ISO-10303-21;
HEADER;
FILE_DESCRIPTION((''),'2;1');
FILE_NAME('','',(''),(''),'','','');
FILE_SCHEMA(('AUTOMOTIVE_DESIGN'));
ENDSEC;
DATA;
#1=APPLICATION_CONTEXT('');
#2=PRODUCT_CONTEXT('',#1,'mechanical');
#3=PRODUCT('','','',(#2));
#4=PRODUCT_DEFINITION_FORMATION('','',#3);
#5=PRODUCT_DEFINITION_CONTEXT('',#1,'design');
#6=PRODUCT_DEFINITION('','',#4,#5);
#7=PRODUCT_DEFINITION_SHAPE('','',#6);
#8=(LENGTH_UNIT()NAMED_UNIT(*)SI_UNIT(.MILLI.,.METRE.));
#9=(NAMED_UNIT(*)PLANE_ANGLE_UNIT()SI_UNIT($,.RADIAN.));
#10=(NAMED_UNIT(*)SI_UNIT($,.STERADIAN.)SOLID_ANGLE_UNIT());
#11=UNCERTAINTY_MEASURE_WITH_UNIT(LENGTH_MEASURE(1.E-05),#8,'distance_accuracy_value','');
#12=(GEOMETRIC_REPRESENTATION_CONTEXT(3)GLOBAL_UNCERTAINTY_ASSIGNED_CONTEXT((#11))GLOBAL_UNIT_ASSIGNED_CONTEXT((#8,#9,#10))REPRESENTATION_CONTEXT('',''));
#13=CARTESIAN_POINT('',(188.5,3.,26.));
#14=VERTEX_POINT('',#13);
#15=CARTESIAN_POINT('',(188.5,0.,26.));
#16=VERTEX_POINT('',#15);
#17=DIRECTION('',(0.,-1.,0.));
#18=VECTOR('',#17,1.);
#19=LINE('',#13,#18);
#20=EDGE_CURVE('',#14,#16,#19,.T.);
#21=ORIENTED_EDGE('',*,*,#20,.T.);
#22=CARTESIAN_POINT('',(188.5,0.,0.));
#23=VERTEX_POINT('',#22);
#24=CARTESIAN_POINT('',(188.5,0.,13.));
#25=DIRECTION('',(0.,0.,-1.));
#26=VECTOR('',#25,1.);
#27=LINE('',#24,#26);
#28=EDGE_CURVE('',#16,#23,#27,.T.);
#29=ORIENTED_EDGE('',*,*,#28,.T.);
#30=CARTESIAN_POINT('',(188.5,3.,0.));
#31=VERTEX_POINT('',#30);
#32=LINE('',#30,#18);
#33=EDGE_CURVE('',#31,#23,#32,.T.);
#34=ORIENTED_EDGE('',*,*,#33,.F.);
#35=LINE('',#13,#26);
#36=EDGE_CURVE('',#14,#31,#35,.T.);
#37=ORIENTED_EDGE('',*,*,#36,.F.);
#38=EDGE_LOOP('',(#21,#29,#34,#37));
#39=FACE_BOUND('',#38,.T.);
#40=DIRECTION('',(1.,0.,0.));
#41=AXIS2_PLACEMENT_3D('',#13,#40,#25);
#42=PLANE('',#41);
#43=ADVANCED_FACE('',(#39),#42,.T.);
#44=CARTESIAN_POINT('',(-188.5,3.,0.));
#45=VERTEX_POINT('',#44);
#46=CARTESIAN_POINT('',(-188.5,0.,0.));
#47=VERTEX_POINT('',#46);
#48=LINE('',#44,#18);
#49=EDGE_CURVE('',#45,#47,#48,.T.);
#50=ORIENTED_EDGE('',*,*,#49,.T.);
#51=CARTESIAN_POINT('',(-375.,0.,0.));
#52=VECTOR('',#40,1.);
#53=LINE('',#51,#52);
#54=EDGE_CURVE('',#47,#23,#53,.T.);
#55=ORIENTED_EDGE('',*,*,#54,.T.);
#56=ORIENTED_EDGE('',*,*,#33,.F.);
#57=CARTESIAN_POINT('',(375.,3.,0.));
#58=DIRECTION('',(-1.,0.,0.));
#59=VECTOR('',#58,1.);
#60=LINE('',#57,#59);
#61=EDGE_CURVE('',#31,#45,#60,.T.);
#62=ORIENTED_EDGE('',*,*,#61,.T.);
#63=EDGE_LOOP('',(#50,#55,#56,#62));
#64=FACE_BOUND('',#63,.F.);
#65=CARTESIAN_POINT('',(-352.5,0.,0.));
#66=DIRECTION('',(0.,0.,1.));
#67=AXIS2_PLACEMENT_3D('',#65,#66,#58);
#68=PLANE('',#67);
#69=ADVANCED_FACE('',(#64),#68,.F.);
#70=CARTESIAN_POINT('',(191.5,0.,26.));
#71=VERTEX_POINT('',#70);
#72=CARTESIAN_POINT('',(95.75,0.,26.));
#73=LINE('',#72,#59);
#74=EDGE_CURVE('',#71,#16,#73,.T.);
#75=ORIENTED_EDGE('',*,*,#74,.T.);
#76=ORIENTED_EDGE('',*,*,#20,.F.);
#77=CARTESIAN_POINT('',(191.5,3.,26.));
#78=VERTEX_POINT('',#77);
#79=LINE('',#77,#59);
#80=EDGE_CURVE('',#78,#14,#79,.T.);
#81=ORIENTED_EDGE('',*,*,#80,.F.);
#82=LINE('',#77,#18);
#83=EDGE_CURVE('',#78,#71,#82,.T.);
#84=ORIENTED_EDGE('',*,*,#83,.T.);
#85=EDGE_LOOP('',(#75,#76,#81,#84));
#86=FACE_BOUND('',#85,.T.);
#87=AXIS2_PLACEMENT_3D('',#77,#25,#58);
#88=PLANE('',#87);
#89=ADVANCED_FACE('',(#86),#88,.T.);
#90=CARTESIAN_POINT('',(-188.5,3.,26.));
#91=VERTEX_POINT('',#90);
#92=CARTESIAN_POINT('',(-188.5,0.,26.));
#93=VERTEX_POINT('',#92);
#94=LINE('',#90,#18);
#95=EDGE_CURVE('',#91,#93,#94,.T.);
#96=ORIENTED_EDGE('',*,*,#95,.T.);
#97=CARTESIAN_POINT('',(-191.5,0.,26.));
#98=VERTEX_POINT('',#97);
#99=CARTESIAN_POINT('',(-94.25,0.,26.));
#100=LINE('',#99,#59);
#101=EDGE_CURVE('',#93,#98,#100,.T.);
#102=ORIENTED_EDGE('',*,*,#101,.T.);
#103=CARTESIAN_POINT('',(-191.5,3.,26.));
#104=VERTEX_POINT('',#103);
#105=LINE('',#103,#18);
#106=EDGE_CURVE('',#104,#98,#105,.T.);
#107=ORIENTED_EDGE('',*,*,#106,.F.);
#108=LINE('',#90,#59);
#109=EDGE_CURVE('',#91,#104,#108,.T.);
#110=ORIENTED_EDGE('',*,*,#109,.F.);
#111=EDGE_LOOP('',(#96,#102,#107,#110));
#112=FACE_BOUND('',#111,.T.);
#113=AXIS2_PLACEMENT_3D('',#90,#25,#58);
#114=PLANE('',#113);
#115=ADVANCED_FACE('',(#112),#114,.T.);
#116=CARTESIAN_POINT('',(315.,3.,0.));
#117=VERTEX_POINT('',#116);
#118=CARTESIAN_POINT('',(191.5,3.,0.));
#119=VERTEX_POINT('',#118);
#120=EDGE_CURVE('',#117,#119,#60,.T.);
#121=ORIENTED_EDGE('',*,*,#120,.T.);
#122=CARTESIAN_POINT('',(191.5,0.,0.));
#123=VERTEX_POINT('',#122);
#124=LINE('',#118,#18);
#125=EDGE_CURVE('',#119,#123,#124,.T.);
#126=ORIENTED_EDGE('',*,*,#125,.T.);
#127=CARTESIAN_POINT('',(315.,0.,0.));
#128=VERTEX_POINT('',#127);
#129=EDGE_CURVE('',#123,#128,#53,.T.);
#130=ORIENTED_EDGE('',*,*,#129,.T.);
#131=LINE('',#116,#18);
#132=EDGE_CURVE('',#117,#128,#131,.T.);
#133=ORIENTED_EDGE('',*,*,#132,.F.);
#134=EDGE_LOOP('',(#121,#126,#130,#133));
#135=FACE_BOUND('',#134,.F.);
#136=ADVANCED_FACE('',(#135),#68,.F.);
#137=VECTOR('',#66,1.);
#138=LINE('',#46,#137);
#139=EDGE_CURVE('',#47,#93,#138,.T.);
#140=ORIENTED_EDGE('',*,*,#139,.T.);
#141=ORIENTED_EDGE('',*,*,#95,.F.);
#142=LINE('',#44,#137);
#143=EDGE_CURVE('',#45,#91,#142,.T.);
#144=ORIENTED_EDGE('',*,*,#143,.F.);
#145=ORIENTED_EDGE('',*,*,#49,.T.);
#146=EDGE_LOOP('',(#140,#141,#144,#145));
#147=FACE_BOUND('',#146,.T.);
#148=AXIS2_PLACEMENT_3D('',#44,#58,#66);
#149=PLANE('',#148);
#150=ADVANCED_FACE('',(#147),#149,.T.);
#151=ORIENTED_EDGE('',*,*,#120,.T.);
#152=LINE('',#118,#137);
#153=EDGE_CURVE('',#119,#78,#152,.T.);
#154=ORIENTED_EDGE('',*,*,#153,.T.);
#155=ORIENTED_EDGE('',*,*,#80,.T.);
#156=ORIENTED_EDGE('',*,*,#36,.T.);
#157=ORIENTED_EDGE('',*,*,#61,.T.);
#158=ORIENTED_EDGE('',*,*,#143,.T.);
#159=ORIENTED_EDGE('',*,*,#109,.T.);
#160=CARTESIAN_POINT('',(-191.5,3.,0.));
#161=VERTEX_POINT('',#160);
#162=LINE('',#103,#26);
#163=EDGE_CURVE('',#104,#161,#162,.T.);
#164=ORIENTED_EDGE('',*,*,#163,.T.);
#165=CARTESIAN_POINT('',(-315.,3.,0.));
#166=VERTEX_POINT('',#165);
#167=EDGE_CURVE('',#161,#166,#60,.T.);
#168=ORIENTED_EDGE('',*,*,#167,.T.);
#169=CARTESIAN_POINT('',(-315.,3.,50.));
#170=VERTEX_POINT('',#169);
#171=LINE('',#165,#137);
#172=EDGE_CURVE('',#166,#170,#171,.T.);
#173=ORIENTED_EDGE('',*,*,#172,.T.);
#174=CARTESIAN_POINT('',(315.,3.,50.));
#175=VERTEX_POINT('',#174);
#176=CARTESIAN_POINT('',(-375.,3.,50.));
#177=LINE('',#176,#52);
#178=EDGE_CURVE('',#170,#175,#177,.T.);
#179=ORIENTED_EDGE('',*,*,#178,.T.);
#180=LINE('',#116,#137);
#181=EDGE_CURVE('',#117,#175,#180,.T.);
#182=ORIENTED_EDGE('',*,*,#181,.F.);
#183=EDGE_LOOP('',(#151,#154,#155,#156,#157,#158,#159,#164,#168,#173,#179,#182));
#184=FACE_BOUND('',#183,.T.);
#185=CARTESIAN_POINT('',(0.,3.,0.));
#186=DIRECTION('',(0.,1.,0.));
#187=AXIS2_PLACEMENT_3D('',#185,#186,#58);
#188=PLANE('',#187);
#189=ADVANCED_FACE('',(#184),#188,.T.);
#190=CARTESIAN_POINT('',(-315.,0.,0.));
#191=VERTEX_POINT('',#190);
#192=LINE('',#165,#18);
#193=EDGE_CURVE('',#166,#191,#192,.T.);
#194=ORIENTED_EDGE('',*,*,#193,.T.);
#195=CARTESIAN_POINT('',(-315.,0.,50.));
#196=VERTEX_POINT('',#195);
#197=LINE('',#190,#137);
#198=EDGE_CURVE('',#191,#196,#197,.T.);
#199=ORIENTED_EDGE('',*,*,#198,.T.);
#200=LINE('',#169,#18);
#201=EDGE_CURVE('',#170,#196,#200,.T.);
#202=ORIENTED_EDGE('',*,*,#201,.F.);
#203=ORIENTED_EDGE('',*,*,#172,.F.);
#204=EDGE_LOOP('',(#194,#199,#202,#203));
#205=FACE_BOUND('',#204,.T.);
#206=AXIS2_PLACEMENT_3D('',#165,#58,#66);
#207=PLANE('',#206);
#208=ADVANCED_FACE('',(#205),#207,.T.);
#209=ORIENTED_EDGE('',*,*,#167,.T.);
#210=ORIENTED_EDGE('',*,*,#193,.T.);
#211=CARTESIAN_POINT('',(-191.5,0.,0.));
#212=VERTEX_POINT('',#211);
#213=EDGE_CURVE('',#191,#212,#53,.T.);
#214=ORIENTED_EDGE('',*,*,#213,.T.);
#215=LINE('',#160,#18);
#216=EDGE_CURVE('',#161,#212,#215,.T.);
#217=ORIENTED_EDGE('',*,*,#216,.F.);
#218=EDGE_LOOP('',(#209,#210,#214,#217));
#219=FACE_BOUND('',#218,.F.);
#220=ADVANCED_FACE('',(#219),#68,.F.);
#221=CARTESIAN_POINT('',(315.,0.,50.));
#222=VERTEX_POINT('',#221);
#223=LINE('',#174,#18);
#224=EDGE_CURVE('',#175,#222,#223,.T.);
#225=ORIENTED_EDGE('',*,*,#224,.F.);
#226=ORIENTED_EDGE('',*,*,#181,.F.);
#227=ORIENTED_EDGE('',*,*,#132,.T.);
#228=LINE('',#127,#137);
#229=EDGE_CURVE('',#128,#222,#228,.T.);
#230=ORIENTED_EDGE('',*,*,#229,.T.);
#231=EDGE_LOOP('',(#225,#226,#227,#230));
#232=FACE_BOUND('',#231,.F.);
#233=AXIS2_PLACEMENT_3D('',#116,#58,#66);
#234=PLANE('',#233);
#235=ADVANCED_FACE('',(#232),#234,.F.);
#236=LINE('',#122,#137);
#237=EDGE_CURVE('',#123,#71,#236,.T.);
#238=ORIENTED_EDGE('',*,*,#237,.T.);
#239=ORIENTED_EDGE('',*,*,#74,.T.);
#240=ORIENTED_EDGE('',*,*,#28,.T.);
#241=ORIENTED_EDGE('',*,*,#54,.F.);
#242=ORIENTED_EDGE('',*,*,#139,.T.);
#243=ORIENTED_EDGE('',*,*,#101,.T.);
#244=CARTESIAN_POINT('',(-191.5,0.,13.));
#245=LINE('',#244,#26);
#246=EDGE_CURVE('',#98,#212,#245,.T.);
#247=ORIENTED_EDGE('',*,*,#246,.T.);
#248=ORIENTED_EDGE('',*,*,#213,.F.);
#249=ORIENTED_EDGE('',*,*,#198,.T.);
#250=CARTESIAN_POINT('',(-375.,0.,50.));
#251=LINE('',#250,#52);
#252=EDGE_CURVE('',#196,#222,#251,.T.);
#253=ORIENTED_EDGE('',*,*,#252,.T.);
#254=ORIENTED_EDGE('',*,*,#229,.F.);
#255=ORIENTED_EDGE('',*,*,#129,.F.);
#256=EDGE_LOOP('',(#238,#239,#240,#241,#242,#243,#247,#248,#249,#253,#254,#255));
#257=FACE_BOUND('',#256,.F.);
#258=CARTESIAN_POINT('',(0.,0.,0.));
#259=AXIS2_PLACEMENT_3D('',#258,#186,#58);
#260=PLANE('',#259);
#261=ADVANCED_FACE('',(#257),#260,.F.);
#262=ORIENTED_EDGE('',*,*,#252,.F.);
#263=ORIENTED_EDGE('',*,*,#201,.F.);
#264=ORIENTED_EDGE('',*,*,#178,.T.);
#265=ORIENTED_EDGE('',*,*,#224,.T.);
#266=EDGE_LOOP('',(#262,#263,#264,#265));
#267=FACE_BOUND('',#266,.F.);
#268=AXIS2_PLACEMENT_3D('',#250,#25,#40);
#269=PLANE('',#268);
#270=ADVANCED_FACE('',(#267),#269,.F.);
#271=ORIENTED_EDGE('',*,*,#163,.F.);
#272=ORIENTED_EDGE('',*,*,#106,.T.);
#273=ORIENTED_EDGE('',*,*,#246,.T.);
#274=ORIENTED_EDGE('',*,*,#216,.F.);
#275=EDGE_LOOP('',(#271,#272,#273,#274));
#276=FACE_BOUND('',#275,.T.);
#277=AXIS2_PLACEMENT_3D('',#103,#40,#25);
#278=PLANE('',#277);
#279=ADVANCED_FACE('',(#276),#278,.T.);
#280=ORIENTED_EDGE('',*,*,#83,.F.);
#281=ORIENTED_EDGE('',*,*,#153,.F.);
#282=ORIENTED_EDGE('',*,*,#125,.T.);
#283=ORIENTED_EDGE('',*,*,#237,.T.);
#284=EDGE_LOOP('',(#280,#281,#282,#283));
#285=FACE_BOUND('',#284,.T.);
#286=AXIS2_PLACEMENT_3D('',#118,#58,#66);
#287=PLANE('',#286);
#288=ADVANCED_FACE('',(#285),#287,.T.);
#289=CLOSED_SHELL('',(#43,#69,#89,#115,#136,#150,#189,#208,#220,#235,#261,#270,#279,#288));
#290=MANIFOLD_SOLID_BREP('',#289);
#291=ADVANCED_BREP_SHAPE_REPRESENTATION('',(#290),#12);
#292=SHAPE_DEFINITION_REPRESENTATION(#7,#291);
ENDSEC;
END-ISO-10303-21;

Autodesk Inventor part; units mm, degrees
ref_plane "YZ Plane" through (0, 0, 0) normal (1, 0, 0) x (0, 1, 0)
ref_plane "XZ Plane" through (0, 0, 0) normal (0, 1, 0) x (-1, 0, 0)
ref_plane "XY Plane" through (0, 0, 0) normal (0, 0, 1) x (1, 0, 0)
sketch "Sketch2" plane through (0, 0, 0) normal (0, 1, 0) x (-1, 0, 0)
  line L0 (375, 50) -> (-375, 50)
  line L1 (-375, 50) -> (-375, 0)
  line L2 (-375, 0) -> (375, 0)
  line L3 (375, 0) -> (375, 50)
  circle A0 centre (-375, 0) radius 22.5
  circle A1 centre (375, 0) radius 22.5
  point P0 (0, 0)
  point P1 (0, 0)
  point P2 (-375, 22.5)
  point P3 (-352.5, 0)
  point P4 (352.5, 0)
  point P5 (375, 22.5)
  dimension "d18" = 750
  dimension "d19" = 50
  dimension "d20" = 45
extrude "Plate2" add sketch "Sketch2" along normal blind 3 contours L3 A1 L2 A0 L1 L0 | L3 L2 A1 | A0 L2 L1 picked at (360.188, 1.6689) picked at (-360.9308, 4.923)
sketch "Sketch3" plane through (0, 3, 0) normal (0, 1, 0) x (1, 0, 0)
  line L0 (-190, 0) -> (-190, -50) construction
  line L1 (-375, -50) -> (375, -50) projected
  line L2 (-375, -50) -> (-375, 0) projected
  line L3 (-191.5, 0) -> (-188.5, 0)
  line L4 (-188.5, 0) -> (-188.5, -26)
  line L5 (-188.5, -26) -> (-191.5, -26)
  line L6 (-191.5, -26) -> (-191.5, 0)
  line L7 (-375, 0) -> (375, 0) projected
  line L8 (375, 0) -> (-375, 0) projected
  line L9 (190, 0) -> (190, -50) construction
  line L10 (191.5, -26) -> (188.5, -26)
  line L11 (188.5, -26) -> (188.5, 0)
  line L12 (188.5, 0) -> (191.5, 0)
  line L13 (191.5, 0) -> (191.5, -26)
  point P0 (0, 0)
  point P1 (0, 0)
  point P2 (0, 0)
  point P3 (188.5, 0)
  dimension "d23" = 3
  dimension "d24" = 26
  dimension "d30" = 190
  dimension "d31" = 190
  dimension "d32" = 3
  dimension "d33" = 26
extrude "Extrusion1" cut sketch "Sketch3" against normal through all
sketch "Sketch4" plane through (0, 3, 0) normal (0, 1, 0) x (1, 0, 0)
  line L0 (-188.5, 0) -> (-188.5, -26) projected
  line L1 (-188.5, -26) -> (-191.5, -26) projected
  line L2 (-191.5, -26) -> (-191.5, 0) projected
  line L3 (-375, 0) -> (-191.5, 0) projected
  line L4 (-375, -50) -> (-375, 0) projected
  line L5 (375, -50) -> (-375, -50) projected
  line L6 (375, 0) -> (375, -50) projected
  line L7 (191.5, 0) -> (375, 0) projected
  line L8 (191.5, 0) -> (191.5, -26) projected
  line L9 (191.5, -26) -> (188.5, -26) projected
  line L10 (188.5, -26) -> (188.5, 0) projected
  line L11 (-188.5, 0) -> (188.5, 0) projected
  line L12 (-191.5, 0) -> (-375, 0) projected
  line L13 (-315, 0) -> (-315, -50)
  line L14 (315, 0) -> (315, -50)
  line L15 (-375, -50) -> (375, -50) projected
  point P0 (0, 0)
  dimension "d35" = 60
  dimension "d36" = 60
extrude "Extrusion2" cut sketch "Sketch4" against normal through all contours L13 L5 L4 L3 | L7 L6 L5 L14
sketch "Sketch5" plane through (0, 0, 0) normal (0, -1, 0) x (1, 0, 0)
  line L0 (-57.747, 1.3029) -> (-57.747, 31.8939) construction
  line L1 (-57.747, 31.8939) -> (64.2813, 31.8939) construction
  line L2 (64.2813, 31.8939) -> (64.2813, 1.3029) construction
  line L3 (64.2813, 1.3029) -> (-57.747, 1.3029) construction
  point P0 (0, 0)
mark "Mark1"
equation "\"d23\" = Thickness"
equation "\"d31\" = d30"
equation "\"d32\" = Thickness"
equation "\"d33\" = d24"
equation "\"d36\" = d35"
equation "\"d21\" = Thickness"
equation "\"BendReliefWidth\" = Thickness"
equation "\"BendReliefDepth\" = 0.5 * Thickness"
equation "\"CornerReliefSize\" = 4 * Thickness"
equation "\"MinimumRemnant\" = 2 * Thickness"
equation "\"TransitionRadius\" = BendRadius"
equation "\"JacobiRadiusSize\" = BendRadius"
equation "\"GapSize\" = Thickness"
equation "\"Thickness\" = 3"
equation "\"BendRadius\" = 5"
properties part number "MSC 107 rib cone" material "Stainless Steel"
